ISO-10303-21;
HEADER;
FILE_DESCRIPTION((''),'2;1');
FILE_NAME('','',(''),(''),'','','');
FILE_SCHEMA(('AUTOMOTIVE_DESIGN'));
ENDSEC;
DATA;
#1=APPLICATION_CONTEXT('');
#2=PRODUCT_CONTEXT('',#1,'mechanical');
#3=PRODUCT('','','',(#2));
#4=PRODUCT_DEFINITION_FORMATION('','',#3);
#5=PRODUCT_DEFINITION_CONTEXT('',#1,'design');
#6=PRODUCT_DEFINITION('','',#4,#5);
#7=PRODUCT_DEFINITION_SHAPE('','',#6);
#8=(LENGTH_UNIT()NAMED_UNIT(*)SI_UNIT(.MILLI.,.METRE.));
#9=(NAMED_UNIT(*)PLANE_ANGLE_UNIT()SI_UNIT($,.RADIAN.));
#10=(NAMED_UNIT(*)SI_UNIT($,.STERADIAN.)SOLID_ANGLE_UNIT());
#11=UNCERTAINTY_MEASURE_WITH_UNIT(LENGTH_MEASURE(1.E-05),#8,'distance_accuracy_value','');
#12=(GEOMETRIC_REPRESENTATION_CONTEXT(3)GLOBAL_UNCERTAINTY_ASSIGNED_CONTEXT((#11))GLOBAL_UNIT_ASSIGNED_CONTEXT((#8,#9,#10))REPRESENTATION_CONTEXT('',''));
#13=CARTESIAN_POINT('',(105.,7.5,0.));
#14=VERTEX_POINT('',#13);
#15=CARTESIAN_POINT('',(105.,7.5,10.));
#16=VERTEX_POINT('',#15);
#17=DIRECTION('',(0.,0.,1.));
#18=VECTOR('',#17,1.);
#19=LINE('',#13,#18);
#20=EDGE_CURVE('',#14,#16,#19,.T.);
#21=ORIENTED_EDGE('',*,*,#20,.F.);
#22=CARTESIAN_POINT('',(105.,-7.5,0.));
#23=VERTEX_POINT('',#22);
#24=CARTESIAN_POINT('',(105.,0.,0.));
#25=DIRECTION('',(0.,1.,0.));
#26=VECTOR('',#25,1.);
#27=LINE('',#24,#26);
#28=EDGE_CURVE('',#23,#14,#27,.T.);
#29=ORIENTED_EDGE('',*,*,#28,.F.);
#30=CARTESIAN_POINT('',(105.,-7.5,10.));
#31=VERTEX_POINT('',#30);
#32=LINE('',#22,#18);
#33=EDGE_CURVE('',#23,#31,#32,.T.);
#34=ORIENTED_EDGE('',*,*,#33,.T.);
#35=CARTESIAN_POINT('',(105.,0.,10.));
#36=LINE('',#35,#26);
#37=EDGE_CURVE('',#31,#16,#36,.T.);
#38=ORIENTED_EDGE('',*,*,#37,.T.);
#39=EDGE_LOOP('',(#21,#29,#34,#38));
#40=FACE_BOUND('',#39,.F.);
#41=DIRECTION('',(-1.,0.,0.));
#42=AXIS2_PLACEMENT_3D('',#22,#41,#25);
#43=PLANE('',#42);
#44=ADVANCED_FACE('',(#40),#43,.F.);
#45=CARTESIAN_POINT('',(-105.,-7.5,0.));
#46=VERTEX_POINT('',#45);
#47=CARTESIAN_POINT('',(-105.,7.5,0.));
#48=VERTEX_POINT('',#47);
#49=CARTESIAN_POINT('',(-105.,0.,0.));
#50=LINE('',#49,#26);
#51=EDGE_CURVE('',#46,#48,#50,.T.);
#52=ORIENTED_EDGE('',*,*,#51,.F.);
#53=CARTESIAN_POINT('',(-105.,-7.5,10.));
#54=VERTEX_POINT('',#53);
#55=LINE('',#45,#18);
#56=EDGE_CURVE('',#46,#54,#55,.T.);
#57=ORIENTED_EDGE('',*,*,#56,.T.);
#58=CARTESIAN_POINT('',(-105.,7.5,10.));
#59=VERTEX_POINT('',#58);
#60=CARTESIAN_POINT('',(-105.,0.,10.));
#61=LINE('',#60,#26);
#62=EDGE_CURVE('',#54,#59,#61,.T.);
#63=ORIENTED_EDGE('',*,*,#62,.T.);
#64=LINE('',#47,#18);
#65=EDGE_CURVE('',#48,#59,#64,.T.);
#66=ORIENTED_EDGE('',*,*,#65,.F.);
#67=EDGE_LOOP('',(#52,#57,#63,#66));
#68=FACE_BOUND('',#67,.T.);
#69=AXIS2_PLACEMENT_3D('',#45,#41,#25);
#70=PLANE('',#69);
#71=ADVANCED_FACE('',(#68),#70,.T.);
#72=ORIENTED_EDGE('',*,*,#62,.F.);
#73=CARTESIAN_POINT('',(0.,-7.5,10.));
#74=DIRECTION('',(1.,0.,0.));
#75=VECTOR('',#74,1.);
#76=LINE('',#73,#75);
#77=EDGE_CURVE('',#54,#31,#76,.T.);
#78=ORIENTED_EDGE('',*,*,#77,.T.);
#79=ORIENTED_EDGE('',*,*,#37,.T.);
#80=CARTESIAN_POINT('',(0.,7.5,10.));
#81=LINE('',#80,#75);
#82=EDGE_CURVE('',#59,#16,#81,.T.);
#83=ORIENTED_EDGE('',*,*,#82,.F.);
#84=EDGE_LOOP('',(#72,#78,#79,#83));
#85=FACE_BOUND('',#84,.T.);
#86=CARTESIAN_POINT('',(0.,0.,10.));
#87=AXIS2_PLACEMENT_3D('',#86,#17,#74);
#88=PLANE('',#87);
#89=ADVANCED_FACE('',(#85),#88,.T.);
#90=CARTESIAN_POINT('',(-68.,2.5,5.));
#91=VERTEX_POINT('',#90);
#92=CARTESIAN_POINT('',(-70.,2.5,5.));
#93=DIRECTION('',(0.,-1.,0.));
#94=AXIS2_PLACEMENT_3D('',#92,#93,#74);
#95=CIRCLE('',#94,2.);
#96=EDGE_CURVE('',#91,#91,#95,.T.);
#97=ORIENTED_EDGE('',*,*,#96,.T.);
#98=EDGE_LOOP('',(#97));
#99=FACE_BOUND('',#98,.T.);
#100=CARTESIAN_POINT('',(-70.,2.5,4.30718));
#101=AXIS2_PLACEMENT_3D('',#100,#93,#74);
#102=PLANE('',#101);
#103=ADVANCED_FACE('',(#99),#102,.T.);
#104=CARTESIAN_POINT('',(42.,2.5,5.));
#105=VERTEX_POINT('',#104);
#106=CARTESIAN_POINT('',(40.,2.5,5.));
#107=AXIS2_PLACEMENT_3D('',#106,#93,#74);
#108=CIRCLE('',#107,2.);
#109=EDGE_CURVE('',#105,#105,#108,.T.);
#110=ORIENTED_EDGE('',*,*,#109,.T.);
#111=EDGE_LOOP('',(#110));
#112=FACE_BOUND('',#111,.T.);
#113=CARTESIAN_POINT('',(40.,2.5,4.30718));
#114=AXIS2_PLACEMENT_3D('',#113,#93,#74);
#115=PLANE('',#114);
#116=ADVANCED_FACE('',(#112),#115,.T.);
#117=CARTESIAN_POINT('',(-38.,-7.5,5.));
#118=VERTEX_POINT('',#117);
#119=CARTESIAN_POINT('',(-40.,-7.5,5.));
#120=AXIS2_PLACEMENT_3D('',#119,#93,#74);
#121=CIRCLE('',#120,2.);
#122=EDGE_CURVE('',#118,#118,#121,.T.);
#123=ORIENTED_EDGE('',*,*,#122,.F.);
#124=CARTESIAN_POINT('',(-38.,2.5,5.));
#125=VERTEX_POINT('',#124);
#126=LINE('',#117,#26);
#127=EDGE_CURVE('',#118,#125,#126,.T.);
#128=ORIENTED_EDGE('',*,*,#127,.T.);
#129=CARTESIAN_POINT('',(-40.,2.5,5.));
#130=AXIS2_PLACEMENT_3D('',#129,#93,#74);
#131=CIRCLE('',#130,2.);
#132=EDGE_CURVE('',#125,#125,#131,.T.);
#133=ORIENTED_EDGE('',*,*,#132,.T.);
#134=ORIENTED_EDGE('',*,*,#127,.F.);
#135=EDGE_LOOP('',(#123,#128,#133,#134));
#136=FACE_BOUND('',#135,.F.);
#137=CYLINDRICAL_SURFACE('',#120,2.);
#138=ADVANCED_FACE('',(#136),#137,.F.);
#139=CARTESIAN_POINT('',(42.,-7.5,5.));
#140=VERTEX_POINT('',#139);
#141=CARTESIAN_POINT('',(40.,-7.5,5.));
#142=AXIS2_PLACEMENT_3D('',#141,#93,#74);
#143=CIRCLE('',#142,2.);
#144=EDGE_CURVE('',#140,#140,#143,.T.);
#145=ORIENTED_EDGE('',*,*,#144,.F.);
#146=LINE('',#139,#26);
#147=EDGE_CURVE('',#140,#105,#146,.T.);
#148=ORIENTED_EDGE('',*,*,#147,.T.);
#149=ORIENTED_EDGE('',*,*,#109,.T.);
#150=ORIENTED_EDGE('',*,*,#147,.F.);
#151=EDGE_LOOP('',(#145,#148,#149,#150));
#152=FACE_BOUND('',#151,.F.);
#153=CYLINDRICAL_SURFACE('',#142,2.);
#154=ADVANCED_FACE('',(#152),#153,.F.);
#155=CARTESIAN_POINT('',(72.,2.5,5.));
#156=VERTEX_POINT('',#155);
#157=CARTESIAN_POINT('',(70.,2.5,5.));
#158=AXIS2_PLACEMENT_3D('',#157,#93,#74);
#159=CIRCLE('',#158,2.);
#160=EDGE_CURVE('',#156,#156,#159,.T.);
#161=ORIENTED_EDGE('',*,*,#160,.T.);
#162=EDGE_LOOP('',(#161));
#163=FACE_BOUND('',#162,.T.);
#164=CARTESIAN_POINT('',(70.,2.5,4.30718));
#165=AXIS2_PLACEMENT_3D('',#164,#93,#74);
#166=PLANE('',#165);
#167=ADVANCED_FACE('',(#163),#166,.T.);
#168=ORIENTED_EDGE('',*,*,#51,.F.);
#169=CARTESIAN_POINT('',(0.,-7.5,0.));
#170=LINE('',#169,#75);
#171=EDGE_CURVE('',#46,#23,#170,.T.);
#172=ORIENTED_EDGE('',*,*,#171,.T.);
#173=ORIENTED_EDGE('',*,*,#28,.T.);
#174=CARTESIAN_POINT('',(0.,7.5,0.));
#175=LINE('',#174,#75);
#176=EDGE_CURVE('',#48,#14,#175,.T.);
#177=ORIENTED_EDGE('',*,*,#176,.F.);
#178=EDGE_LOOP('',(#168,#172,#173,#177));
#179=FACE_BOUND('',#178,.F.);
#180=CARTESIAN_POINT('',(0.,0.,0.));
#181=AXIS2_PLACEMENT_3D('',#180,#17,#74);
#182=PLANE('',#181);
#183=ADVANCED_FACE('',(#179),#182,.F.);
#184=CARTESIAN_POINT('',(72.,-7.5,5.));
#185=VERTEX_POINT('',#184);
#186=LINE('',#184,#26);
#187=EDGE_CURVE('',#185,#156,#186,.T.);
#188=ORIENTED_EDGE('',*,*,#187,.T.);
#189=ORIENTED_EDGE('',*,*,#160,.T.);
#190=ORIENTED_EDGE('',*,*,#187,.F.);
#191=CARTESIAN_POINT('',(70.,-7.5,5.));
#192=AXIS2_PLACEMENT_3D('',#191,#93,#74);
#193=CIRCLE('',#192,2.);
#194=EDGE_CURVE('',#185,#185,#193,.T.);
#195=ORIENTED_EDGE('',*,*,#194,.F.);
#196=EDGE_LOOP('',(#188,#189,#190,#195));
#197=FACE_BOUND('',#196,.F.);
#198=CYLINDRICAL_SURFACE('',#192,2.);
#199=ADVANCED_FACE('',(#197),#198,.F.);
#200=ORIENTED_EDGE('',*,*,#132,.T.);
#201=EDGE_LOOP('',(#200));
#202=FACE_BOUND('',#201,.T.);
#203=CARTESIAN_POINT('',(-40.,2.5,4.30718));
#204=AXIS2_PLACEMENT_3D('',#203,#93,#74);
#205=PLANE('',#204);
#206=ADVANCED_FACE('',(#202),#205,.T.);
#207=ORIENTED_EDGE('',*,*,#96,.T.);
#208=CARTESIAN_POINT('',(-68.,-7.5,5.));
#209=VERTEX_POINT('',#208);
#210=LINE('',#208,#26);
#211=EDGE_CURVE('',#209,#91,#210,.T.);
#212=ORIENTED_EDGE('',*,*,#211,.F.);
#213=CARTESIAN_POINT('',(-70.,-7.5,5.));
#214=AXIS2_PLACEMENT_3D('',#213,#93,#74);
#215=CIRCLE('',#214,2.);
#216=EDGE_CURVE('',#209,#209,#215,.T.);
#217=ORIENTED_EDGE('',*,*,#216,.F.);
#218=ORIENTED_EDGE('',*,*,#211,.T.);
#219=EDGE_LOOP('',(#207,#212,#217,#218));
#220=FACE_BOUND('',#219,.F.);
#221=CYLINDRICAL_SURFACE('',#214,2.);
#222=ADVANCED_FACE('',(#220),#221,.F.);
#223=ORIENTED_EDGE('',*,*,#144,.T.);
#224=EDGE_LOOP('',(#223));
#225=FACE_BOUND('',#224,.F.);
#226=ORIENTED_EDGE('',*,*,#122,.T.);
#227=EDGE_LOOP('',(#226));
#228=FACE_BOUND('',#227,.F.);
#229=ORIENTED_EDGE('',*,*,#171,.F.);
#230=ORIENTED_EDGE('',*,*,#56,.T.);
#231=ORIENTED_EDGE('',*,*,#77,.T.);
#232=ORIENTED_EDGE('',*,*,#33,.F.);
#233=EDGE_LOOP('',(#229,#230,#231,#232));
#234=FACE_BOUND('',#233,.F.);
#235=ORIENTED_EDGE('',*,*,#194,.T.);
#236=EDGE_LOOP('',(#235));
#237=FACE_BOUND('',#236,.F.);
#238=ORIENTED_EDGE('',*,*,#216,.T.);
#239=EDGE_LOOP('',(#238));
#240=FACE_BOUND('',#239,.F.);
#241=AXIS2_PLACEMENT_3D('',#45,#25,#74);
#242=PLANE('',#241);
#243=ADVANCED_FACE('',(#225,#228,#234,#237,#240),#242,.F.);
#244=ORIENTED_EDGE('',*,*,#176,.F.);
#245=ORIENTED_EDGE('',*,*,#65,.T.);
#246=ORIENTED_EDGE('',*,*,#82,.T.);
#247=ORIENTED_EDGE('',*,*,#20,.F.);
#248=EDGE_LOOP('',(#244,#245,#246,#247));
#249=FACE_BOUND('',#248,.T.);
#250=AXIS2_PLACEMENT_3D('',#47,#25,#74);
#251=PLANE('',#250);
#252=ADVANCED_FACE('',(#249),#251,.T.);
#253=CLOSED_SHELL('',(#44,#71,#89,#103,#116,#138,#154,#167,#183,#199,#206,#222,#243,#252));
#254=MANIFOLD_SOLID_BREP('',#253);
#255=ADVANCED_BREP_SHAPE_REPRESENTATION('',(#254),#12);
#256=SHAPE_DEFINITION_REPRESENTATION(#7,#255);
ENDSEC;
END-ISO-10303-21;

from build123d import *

# Parameters (mm, degrees)
F0_W     = 210
F0_H     = 15
F1_DEPTH = 10
F3_DEPTH = 10


with BuildPart() as f1:
    # F0 (on Top) → F1 (new body)
    with BuildSketch(Plane.XY):
        Rectangle(F0_W, F0_H)
    extrude(amount=F1_DEPTH)

    # F2 (on face) → F3 (cut)
    with BuildSketch(Plane.XZ.offset(7.5)):
        with BuildLine():
            ThreePointArc((68, 5), (70, 3), (72, 5))
            Line((72, 5), (68, 5))
        make_face()
        with BuildLine():
            Line((68, 5), (72, 5))
            ThreePointArc((72, 5), (70, 7), (68, 5))
        make_face()
        with BuildLine():
            ThreePointArc((-72, 5), (-70, 3), (-68, 5))
            Line((-68, 5), (-72, 5))
        make_face()
        with BuildLine():
            Line((-72, 5), (-68, 5))
            ThreePointArc((-68, 5), (-70, 7), (-72, 5))
        make_face()
        with BuildLine():
            ThreePointArc((-42, 5), (-40, 3), (-38, 5))
            Line((-38, 5), (-42, 5))
        make_face()
        with BuildLine():
            Line((-42, 5), (-38, 5))
            ThreePointArc((-38, 5), (-40, 7), (-42, 5))
        make_face()
        with BuildLine():
            ThreePointArc((38, 5), (40, 3), (42, 5))
            Line((42, 5), (38, 5))
        make_face()
        with BuildLine():
            Line((38, 5), (42, 5))
            ThreePointArc((42, 5), (40, 7), (38, 5))
        make_face()
    extrude(amount=-F3_DEPTH, mode=Mode.SUBTRACT)


solid = f1.part
